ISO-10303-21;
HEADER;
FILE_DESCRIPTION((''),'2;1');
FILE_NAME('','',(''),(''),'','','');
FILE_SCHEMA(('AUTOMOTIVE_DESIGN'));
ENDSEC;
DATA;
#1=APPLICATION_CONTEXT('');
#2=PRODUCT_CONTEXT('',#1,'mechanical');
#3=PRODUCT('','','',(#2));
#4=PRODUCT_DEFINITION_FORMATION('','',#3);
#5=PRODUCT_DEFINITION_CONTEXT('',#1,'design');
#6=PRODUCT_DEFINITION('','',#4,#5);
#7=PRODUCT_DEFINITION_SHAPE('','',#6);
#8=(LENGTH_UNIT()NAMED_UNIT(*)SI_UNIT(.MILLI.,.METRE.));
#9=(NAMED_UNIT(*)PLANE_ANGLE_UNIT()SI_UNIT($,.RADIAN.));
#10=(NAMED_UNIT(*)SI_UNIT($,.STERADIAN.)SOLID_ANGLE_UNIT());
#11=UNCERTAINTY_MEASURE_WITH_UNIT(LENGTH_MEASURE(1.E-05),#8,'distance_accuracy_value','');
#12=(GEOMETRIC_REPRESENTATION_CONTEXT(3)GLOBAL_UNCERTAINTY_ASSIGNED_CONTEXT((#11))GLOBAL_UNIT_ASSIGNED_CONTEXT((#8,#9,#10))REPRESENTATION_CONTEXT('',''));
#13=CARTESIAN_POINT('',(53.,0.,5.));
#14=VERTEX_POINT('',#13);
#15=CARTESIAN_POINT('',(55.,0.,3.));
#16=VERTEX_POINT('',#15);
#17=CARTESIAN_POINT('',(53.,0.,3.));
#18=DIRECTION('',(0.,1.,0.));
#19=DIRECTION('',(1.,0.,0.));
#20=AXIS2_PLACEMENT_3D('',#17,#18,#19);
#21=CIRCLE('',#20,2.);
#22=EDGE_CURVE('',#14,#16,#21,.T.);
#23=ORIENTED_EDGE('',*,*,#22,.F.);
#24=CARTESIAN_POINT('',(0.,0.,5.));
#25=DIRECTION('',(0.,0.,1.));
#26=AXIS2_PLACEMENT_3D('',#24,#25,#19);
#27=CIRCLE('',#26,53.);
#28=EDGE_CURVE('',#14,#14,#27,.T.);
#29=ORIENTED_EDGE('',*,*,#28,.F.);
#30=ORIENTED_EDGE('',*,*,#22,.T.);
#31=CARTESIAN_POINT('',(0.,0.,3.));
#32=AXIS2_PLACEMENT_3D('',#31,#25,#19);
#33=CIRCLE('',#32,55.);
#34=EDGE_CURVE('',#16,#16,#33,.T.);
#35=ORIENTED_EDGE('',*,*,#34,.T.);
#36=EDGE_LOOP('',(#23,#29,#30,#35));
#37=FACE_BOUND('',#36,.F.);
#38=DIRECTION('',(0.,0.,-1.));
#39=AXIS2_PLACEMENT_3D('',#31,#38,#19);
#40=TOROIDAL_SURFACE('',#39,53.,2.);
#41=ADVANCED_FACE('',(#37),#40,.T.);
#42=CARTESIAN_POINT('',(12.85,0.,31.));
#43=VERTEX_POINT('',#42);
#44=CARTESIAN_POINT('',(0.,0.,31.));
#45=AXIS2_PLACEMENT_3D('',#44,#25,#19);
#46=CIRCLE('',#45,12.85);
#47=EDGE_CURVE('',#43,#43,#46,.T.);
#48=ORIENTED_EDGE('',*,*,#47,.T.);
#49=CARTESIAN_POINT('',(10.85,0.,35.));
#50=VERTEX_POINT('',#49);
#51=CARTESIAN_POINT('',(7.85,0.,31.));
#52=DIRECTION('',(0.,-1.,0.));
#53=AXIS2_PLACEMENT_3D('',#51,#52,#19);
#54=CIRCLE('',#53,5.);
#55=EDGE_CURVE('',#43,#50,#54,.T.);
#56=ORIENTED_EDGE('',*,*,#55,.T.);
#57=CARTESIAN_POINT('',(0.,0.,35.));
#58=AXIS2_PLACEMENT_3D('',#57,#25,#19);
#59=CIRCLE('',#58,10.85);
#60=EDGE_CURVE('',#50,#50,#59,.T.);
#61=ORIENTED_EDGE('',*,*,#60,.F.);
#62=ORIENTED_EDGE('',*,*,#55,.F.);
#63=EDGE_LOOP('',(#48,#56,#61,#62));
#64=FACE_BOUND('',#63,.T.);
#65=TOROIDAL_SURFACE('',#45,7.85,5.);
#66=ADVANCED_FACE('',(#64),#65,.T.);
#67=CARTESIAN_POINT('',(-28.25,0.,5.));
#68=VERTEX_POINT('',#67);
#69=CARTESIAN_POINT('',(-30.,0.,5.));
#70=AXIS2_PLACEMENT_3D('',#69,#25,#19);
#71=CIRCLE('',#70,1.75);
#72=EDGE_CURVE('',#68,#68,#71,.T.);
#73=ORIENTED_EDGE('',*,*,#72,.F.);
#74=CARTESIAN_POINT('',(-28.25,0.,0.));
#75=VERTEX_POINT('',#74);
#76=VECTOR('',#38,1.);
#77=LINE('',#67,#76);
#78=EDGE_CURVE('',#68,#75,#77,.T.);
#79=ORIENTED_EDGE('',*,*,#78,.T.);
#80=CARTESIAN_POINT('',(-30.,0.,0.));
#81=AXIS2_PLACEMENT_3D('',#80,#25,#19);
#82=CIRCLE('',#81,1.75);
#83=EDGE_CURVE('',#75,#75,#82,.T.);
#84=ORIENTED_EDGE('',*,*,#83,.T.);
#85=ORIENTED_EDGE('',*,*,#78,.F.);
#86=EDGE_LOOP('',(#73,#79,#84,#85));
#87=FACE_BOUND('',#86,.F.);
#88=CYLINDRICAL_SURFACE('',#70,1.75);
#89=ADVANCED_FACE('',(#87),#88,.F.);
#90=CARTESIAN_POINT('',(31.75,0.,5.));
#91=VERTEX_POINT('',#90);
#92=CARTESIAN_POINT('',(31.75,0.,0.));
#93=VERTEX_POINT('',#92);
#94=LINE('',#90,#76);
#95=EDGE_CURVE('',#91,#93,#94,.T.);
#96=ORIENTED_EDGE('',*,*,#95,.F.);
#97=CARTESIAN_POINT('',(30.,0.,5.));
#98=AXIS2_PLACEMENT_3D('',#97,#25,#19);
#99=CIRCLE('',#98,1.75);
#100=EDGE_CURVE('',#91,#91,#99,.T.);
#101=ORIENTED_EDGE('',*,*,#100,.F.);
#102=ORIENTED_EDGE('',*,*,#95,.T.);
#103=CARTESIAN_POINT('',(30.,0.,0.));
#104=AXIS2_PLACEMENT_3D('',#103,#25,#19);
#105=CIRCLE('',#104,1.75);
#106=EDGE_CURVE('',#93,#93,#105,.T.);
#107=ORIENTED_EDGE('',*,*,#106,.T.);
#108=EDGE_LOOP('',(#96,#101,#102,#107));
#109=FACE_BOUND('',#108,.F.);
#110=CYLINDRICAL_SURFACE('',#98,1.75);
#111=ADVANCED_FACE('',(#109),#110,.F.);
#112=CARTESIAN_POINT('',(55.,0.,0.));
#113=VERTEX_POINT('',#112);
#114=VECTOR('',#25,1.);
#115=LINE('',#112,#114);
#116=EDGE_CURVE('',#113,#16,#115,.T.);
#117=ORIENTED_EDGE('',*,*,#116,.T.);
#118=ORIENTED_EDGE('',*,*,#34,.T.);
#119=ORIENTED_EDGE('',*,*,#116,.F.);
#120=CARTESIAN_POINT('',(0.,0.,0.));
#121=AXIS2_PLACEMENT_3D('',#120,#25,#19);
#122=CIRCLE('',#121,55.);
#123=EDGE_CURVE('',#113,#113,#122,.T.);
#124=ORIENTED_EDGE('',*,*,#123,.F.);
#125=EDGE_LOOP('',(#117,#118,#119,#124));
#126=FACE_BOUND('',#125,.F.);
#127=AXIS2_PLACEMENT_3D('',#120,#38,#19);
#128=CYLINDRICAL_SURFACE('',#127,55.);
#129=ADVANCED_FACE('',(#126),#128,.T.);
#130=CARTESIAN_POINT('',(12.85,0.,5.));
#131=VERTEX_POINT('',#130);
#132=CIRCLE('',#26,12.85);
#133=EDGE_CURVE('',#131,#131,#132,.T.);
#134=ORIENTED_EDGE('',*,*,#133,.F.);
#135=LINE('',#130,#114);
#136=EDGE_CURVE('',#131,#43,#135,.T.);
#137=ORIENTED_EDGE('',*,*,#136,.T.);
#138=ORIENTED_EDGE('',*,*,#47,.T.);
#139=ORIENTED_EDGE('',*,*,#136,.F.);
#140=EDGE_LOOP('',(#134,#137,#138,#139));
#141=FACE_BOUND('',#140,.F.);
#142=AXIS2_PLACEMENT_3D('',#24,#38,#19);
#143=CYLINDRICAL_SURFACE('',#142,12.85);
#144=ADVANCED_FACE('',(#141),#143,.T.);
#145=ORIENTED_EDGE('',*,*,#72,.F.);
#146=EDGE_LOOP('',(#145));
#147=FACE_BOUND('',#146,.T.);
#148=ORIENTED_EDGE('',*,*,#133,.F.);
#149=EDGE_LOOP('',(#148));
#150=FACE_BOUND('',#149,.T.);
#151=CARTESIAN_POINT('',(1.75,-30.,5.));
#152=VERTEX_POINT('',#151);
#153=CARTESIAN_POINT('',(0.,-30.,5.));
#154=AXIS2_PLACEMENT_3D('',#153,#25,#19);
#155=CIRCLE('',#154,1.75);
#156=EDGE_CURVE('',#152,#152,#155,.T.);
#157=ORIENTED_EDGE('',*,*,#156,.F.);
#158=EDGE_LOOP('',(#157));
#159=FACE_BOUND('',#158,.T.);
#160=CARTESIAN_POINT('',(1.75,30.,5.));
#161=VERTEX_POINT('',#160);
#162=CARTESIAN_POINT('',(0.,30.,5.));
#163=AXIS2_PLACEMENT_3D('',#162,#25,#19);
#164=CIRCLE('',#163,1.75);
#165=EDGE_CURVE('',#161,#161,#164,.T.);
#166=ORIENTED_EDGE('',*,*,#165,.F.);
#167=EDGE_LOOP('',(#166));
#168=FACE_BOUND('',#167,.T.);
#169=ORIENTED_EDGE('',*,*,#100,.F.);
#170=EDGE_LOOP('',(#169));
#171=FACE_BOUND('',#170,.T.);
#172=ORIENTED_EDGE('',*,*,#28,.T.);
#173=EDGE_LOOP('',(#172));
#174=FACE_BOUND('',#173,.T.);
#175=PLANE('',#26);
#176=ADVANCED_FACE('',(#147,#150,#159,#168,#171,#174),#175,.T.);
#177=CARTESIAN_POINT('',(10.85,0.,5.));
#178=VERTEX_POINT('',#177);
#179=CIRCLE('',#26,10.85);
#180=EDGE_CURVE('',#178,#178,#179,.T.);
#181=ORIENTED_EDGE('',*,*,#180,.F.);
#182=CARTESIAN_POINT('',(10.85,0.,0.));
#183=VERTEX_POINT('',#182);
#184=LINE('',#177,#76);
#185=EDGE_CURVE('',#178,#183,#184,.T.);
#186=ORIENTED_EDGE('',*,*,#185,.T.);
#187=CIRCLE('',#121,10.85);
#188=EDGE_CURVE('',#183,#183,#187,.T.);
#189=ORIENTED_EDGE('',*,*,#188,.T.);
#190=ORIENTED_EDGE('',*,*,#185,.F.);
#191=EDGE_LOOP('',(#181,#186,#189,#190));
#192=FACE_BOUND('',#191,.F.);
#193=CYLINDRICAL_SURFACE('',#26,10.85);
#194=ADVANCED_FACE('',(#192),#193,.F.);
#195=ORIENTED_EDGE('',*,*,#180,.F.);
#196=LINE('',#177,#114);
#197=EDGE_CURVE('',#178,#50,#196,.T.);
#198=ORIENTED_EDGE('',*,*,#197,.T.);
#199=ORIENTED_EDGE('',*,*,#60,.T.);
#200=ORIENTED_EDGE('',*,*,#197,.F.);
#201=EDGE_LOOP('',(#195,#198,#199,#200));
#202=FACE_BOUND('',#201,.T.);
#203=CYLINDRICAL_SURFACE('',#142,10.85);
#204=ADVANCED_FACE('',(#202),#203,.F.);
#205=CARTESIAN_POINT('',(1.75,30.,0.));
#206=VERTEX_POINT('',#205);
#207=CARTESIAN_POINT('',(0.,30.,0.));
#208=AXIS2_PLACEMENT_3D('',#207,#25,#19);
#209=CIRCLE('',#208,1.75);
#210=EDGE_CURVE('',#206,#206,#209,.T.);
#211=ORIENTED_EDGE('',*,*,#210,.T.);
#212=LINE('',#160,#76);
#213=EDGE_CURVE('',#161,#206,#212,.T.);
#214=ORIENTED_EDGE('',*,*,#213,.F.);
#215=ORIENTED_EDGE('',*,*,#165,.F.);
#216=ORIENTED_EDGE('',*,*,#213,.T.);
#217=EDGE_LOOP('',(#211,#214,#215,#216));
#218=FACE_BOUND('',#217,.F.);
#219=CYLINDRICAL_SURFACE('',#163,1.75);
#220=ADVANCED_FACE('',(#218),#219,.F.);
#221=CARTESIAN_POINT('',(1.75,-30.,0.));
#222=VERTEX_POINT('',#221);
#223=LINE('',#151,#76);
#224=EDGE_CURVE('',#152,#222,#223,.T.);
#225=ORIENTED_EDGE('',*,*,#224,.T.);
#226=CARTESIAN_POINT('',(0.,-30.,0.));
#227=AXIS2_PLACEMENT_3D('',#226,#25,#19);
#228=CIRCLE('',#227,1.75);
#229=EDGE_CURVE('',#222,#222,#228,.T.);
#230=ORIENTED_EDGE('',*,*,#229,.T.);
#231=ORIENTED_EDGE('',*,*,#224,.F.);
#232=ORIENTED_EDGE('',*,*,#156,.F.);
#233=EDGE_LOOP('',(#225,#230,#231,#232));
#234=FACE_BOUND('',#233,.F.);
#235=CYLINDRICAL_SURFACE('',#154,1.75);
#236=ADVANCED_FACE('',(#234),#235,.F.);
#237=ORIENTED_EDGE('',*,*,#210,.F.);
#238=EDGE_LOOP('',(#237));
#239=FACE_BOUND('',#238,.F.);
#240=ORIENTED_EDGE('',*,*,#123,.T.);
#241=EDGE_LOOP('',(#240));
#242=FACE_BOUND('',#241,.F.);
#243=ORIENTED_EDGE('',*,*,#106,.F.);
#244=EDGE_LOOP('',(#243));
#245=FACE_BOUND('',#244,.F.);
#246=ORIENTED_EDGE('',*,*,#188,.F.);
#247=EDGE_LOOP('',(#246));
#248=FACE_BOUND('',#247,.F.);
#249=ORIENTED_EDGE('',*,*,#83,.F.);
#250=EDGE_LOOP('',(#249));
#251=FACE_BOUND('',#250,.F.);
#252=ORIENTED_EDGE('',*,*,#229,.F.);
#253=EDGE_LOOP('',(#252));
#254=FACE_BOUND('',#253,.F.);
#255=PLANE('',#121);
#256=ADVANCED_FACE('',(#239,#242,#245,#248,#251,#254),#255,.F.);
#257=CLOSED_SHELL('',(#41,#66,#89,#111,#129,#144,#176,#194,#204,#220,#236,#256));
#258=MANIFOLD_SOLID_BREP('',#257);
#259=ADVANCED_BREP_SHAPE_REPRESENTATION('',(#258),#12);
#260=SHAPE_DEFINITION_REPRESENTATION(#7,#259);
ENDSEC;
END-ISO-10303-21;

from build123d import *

# Parameters (mm, degrees)
F0_R     = 55
F1_DEPTH = 5
F2_R     = 10.85
F3_DEPTH = 25
F4_R     = 12.85
F4_R_2   = 10.85
F5_DEPTH = 30
F7_R     = 2
F8_R     = 1.75
F9_DEPTH = 25


# Not quite as in the source:
# - a fillet or chamfer that OpenCascade refuses, or shapes differently, is made with other operations: its cross-section is extruded or revolved along the edge and cut away or added


with BuildPart() as f1:
    # F0 (on Top) → F1 (new body)
    with BuildSketch(Plane.XY):
        Circle(F0_R)
    extrude(amount=F1_DEPTH)

    # F2 (on face) → F3 (cut)
    with BuildSketch(Plane.XY.offset(5)):
        Circle(F2_R)
    extrude(amount=-F3_DEPTH, mode=Mode.SUBTRACT)

    # F4 (on face) → F5 (join)
    with BuildSketch(Plane.XY.offset(5)):
        Circle(F4_R)
        Circle(F4_R_2, mode=Mode.SUBTRACT)
    extrude(amount=F5_DEPTH)

    # F6: fillet of radius 5 on 1 edges, made by hand

    # F6_s1 → F6_t2 (revolve, cut)
    with BuildSketch(Plane.XZ):
        with BuildLine():
            ThreePointArc((12.85, 31), (12.322135955, 33.2360679775), (10.85, 35))
            Line((10.85, 35), (12.85, 35))
            Line((12.85, 35), (12.85, 31))
        make_face()
    revolve(axis=Axis((0, 0, 35), (0, 0, 1)), mode=Mode.SUBTRACT)

    # F7
    f7_edges = [f1.edges().sort_by_distance(p)[0] for p in [
        (-55, 0, 5),
    ]]
    fillet(f7_edges, radius=F7_R)

    # F8 (on face) → F9 (cut)
    with BuildSketch(Plane.XY.offset(5)):
        with Locations((-30, 0)):
            Circle(F8_R)
        with Locations((0, -30)):
            Circle(F8_R)
        with Locations((30, 0)):
            Circle(F8_R)
        with Locations((0, 30)):
            Circle(F8_R)
    extrude(amount=-F9_DEPTH, mode=Mode.SUBTRACT)


solid = f1.part
